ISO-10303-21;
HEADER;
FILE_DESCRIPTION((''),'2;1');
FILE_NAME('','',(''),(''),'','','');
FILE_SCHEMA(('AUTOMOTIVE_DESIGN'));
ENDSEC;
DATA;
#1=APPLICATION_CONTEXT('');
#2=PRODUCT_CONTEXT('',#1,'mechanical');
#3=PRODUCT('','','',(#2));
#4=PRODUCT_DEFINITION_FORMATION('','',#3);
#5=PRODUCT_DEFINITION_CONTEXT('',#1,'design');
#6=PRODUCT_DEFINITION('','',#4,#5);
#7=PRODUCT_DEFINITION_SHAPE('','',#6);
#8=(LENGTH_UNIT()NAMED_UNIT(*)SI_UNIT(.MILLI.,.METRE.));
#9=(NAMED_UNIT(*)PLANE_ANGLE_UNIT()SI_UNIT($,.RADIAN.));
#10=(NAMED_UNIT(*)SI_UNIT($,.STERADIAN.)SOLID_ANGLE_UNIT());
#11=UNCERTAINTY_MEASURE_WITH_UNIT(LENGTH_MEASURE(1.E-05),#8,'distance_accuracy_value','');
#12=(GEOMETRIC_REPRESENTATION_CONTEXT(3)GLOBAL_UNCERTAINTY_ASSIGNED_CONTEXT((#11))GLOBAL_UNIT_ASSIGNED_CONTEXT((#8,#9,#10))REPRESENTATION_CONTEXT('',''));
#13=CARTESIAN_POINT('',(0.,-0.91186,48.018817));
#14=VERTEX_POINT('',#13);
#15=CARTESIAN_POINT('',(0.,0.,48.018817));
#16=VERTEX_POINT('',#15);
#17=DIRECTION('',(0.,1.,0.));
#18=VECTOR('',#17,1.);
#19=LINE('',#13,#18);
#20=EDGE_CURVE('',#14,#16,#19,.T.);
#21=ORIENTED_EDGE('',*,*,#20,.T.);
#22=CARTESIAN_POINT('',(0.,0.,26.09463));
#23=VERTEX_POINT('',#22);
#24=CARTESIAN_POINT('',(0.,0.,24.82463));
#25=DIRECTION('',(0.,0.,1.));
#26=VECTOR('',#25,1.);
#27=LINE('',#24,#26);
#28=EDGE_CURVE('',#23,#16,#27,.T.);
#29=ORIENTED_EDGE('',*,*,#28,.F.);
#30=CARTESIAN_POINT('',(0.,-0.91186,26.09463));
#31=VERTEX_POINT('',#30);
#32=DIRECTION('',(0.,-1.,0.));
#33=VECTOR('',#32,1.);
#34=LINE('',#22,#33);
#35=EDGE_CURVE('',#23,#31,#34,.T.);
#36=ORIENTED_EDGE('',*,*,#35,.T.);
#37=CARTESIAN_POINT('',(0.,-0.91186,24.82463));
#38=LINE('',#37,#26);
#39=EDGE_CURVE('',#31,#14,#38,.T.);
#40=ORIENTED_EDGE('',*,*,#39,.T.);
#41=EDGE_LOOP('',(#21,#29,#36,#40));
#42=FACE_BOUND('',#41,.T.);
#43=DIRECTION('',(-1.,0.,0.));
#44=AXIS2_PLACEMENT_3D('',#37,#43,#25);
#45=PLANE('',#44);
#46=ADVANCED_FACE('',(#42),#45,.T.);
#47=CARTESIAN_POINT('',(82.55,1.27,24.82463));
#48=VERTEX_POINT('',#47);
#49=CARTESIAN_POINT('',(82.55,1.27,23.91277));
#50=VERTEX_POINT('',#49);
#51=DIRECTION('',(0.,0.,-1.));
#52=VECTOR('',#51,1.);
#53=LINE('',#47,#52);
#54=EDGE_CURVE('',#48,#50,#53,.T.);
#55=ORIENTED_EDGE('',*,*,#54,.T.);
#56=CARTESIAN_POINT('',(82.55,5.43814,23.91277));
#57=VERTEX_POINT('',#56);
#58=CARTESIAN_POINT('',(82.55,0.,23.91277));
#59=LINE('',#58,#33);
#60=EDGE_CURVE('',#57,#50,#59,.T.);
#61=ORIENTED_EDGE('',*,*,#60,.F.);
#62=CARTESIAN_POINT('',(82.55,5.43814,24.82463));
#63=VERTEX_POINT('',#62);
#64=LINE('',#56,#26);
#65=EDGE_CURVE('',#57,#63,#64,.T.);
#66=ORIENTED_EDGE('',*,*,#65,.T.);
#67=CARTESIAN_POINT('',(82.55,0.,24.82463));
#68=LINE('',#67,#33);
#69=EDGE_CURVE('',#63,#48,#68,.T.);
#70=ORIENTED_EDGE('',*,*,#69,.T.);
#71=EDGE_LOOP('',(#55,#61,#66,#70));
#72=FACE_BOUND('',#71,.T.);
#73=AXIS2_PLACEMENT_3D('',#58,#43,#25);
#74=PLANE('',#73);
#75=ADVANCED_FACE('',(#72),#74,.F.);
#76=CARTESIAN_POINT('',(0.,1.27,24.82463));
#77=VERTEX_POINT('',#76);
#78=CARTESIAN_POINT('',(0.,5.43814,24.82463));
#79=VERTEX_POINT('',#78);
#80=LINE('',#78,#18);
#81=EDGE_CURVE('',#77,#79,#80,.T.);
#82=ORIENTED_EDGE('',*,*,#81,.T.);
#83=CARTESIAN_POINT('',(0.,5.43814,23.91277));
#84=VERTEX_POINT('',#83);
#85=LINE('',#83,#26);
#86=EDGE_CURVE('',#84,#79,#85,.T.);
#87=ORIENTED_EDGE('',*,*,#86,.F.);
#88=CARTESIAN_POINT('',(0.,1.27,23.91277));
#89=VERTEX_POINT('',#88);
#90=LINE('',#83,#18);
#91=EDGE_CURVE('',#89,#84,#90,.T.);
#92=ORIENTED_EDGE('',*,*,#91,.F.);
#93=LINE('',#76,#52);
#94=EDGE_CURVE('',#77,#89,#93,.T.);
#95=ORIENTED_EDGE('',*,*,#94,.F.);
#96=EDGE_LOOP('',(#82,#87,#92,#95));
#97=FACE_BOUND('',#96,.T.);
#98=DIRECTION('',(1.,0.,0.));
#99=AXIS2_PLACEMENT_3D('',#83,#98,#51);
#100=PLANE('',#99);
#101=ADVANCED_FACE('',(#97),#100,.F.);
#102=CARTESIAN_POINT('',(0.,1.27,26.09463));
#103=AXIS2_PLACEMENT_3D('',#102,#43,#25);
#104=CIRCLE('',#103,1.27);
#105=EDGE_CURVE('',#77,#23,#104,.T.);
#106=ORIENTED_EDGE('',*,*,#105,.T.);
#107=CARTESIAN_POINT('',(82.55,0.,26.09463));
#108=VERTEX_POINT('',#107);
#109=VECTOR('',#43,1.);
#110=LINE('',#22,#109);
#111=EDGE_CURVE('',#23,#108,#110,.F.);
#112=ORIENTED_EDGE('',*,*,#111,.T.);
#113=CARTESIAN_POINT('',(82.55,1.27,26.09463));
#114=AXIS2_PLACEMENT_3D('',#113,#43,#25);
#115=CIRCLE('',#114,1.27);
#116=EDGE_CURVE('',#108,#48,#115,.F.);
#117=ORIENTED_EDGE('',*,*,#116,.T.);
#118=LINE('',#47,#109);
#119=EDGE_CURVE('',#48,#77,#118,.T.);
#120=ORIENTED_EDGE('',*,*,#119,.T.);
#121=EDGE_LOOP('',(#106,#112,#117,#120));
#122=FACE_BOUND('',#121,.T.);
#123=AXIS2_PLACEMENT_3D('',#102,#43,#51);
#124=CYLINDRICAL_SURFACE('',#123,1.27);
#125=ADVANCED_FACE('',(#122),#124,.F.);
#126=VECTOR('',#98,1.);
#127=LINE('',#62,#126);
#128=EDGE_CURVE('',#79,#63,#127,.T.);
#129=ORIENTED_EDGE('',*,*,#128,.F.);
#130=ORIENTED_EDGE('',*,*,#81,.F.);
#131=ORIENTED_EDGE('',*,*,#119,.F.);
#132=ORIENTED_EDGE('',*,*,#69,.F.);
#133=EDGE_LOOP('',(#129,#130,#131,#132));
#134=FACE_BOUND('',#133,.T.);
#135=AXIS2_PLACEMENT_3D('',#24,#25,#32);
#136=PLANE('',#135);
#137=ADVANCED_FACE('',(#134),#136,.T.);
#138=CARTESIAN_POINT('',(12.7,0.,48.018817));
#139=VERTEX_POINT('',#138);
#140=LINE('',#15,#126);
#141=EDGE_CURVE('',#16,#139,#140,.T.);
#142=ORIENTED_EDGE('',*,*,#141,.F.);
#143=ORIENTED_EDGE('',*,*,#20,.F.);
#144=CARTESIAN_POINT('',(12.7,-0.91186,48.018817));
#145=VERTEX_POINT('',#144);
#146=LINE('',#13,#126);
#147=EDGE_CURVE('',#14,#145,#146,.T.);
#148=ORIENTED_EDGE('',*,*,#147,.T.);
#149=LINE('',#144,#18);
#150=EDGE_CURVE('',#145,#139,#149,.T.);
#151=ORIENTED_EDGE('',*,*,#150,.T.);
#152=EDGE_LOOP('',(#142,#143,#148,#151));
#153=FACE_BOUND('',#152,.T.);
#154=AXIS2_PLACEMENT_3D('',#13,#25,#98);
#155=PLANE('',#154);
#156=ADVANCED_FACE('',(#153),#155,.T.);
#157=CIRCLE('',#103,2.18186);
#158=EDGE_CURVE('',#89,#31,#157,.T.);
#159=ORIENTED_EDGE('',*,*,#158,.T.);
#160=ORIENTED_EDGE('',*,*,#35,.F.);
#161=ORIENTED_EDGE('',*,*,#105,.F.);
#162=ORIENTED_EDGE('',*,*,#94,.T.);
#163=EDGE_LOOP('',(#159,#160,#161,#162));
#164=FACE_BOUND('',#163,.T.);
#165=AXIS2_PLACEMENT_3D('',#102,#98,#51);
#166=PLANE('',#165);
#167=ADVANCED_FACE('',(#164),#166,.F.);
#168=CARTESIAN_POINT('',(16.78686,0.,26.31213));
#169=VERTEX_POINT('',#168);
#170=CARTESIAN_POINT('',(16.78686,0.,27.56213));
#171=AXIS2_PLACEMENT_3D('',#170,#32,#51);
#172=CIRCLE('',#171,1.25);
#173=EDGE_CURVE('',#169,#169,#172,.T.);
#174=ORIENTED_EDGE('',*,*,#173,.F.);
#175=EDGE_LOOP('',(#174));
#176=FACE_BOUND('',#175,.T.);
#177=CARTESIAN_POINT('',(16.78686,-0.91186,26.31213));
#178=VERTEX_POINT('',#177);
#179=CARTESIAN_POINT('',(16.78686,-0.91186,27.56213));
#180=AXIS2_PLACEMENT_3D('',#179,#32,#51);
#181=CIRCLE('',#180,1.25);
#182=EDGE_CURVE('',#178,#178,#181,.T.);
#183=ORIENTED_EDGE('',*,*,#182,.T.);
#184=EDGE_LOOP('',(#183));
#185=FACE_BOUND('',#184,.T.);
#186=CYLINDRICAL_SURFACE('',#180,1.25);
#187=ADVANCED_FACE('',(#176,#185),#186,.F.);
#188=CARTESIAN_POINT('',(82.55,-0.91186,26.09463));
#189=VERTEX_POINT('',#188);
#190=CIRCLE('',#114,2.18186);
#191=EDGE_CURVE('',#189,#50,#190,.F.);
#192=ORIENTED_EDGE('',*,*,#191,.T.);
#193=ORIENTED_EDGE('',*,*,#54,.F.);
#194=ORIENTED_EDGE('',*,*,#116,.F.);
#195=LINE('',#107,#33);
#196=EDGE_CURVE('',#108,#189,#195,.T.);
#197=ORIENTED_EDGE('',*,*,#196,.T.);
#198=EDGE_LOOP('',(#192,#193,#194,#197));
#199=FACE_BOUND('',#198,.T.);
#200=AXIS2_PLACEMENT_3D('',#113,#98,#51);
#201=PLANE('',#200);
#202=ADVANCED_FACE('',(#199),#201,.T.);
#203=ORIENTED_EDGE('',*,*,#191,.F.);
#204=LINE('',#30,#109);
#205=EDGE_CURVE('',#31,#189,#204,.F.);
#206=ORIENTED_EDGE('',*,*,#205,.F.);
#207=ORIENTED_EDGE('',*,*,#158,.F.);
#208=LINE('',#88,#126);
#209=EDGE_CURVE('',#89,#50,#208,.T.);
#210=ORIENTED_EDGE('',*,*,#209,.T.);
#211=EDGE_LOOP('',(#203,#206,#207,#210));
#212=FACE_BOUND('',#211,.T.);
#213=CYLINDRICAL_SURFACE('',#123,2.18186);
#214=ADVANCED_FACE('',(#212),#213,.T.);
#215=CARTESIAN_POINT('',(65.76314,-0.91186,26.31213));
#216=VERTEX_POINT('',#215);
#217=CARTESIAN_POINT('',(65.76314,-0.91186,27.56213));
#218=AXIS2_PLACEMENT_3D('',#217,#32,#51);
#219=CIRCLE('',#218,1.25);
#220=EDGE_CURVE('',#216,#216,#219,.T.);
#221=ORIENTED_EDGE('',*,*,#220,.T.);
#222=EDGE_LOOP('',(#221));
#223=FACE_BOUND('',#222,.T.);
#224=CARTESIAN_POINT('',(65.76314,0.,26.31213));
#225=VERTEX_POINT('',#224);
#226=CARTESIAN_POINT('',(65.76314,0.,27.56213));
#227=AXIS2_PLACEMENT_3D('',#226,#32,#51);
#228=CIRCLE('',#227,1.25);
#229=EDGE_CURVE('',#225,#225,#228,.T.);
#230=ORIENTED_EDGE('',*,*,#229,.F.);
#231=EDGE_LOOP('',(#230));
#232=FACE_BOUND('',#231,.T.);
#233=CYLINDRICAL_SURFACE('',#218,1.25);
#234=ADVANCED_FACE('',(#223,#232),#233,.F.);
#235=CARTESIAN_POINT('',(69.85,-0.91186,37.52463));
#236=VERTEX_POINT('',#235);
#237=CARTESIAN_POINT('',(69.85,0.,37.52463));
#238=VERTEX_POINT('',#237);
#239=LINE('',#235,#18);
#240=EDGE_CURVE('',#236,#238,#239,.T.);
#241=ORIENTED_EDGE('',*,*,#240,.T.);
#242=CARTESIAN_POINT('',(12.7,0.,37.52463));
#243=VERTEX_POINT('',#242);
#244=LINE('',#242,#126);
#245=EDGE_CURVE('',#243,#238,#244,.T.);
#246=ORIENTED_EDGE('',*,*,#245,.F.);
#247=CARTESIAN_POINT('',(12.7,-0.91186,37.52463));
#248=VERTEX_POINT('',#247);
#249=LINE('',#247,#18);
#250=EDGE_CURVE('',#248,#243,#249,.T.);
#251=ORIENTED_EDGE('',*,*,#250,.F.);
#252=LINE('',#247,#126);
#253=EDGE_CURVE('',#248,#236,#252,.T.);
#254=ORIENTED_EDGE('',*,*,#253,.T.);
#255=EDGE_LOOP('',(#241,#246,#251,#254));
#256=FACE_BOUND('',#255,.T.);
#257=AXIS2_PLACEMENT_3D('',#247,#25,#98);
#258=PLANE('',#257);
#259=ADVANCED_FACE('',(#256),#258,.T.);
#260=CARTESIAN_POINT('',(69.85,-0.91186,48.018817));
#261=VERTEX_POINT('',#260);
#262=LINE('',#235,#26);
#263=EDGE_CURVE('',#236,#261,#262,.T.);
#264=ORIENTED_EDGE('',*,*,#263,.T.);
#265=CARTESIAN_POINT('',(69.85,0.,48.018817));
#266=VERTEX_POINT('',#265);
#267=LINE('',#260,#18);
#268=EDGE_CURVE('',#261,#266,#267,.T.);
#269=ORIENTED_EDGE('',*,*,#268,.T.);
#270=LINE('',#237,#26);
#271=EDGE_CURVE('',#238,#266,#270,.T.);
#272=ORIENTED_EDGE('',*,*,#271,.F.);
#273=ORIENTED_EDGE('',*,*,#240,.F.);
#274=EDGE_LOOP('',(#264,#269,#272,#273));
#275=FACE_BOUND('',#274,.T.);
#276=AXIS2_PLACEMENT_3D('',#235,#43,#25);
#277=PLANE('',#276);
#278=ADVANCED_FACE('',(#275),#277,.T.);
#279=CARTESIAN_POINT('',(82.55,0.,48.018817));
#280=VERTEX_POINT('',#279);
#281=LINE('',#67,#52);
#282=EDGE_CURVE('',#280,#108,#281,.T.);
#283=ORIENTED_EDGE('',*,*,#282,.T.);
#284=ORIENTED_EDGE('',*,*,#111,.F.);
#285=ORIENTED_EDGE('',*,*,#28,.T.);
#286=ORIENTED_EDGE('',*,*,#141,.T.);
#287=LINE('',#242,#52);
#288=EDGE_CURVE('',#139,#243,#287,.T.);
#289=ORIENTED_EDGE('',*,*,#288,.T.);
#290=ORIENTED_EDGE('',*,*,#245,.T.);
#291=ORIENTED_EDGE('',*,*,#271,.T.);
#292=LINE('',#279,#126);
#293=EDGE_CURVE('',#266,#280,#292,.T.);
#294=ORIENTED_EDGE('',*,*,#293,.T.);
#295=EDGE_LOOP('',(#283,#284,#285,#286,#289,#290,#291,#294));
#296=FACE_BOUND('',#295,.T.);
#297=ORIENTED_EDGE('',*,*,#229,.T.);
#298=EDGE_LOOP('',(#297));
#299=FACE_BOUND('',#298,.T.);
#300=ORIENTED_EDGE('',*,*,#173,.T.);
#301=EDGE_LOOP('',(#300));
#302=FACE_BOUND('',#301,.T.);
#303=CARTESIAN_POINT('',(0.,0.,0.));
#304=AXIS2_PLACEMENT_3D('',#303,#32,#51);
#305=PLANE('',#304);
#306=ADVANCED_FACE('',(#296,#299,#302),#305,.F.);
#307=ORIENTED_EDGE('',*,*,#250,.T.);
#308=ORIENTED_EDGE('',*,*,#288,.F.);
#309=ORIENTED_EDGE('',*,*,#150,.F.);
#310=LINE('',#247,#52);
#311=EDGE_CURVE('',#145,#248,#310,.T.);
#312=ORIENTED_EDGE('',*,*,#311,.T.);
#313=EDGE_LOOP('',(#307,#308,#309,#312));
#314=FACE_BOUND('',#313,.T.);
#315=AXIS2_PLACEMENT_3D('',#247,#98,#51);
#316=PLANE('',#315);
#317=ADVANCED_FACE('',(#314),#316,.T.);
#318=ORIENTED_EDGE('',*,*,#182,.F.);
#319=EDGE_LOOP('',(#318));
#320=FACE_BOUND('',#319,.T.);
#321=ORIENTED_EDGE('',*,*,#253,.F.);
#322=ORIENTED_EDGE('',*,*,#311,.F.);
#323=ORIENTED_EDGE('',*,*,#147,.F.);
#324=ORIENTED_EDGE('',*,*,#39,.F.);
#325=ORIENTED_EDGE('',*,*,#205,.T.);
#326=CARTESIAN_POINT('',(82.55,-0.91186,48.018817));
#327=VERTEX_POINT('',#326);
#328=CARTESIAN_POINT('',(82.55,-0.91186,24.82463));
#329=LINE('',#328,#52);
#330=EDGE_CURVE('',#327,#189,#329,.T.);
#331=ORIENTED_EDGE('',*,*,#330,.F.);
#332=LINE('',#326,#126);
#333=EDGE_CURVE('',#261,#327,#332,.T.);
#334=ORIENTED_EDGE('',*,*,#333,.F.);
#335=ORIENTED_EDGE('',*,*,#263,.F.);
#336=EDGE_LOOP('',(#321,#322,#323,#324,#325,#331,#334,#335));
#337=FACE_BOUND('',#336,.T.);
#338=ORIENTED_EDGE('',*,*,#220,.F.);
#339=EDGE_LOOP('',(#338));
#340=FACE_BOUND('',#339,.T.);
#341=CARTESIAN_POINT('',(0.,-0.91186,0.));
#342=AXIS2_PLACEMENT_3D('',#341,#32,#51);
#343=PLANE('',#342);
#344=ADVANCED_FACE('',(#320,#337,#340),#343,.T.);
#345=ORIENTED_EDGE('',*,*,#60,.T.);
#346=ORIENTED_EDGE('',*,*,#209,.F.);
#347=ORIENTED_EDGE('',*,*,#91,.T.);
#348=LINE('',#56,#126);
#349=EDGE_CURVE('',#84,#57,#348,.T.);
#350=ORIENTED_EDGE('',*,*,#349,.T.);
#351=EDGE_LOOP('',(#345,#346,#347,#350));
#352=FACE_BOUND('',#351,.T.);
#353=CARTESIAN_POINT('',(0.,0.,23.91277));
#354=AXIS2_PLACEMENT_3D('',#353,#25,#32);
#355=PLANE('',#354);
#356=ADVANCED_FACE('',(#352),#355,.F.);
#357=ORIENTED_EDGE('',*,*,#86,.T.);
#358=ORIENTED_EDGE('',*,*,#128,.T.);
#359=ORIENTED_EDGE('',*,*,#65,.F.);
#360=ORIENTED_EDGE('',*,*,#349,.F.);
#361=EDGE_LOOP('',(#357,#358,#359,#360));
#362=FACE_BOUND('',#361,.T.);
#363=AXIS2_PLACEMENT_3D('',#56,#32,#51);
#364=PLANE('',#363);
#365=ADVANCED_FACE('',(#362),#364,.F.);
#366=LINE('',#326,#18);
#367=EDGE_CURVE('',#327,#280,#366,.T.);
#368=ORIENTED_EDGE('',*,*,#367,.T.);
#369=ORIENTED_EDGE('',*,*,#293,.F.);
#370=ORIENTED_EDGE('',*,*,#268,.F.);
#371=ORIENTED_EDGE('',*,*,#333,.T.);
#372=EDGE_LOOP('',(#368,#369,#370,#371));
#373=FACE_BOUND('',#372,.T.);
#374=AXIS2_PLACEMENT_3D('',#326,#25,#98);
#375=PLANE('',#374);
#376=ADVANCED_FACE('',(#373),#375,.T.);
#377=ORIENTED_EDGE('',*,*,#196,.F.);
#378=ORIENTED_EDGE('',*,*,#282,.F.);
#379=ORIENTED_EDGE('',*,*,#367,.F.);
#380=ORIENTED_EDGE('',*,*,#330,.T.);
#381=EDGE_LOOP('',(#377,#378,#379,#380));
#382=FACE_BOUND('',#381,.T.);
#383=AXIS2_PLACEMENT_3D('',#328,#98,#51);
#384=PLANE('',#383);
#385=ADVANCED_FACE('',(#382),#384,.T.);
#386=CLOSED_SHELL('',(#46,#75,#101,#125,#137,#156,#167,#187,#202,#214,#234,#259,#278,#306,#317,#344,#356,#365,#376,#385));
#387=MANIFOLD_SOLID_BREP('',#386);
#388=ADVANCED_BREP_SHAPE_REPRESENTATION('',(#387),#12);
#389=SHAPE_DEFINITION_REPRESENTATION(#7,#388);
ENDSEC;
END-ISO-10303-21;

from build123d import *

# Parameters (mm, degrees)
BASE_FLANGE1_DEPTH           = 0.91186
F_2_5MM_DOWEL_HOLE1_D        = 2.5
EDGE_FLANGE1_STRIP_W         = 6.18744
EDGE_FLANGE1_STRIP_H         = 0.91186
EDGE_FLANGE1_STRIP_CUT_DEPTH = 82.55
EDGE_FLANGE1_DEPTH           = 82.55


# Sheet-metal steps are written as plain solids
with BuildPart() as part:
    # Sketch1 → Base-Flange1 (new body)
    with BuildSketch(Plane(origin=(0, 0, 0), x_dir=(1, 0, 0), z_dir=(0, 1, 0))):
        Polygon((0, -24.82463), (0, -48.018817445), (12.7, -48.018817445), (12.7, -37.52463), (69.85, -37.52463), (69.85, -48.018817445), (82.55, -48.018817445), (82.55, -24.82463), align=None)
    extrude(amount=-BASE_FLANGE1_DEPTH)

    # Ø2.5mm Dowel Hole1 (through all)
    with Locations(Plane(origin=(0, -0.91186, 0), x_dir=(-1, 0, 0), z_dir=(0, -1, 0))):
        with Locations((-65.76314, -27.56213), (-16.78686, -27.56213)):
            Hole(F_2_5MM_DOWEL_HOLE1_D / 2)

    # Edge-Flange1 strip (across the edge) → Edge-Flange1 strip cut (cut)
    with BuildSketch(Plane(origin=(82.55, 0, 24.82463), x_dir=(0, 0, 1), z_dir=(-1, 0, 0))):
        with Locations((-1.82372, -0.45593)):
            Rectangle(EDGE_FLANGE1_STRIP_W, EDGE_FLANGE1_STRIP_H)
    extrude(amount=EDGE_FLANGE1_STRIP_CUT_DEPTH, mode=Mode.SUBTRACT)

    # Edge-Flange1 section (across the edge) → Edge-Flange1 (add)
    with BuildSketch(Plane(origin=(82.55, 0, 24.82463), x_dir=(0, 0, 1), z_dir=(-1, 0, 0))):
        with BuildLine():
            Line((-0.91186, 1.27), (-0.91186, 5.43814))
            Line((-0.91186, 5.43814), (0, 5.43814))
            Line((0, 5.43814), (0, 1.27))
            ThreePointArc((0, 1.27), (0.371974388, 0.371974388), (1.27, 0))
            Line((1.27, 0), (1.27, -0.91186))
            ThreePointArc((1.27, -0.91186), (-0.272808002, -0.272808002), (-0.91186, 1.27))
        make_face()
    extrude(amount=EDGE_FLANGE1_DEPTH)


solid = part.part
